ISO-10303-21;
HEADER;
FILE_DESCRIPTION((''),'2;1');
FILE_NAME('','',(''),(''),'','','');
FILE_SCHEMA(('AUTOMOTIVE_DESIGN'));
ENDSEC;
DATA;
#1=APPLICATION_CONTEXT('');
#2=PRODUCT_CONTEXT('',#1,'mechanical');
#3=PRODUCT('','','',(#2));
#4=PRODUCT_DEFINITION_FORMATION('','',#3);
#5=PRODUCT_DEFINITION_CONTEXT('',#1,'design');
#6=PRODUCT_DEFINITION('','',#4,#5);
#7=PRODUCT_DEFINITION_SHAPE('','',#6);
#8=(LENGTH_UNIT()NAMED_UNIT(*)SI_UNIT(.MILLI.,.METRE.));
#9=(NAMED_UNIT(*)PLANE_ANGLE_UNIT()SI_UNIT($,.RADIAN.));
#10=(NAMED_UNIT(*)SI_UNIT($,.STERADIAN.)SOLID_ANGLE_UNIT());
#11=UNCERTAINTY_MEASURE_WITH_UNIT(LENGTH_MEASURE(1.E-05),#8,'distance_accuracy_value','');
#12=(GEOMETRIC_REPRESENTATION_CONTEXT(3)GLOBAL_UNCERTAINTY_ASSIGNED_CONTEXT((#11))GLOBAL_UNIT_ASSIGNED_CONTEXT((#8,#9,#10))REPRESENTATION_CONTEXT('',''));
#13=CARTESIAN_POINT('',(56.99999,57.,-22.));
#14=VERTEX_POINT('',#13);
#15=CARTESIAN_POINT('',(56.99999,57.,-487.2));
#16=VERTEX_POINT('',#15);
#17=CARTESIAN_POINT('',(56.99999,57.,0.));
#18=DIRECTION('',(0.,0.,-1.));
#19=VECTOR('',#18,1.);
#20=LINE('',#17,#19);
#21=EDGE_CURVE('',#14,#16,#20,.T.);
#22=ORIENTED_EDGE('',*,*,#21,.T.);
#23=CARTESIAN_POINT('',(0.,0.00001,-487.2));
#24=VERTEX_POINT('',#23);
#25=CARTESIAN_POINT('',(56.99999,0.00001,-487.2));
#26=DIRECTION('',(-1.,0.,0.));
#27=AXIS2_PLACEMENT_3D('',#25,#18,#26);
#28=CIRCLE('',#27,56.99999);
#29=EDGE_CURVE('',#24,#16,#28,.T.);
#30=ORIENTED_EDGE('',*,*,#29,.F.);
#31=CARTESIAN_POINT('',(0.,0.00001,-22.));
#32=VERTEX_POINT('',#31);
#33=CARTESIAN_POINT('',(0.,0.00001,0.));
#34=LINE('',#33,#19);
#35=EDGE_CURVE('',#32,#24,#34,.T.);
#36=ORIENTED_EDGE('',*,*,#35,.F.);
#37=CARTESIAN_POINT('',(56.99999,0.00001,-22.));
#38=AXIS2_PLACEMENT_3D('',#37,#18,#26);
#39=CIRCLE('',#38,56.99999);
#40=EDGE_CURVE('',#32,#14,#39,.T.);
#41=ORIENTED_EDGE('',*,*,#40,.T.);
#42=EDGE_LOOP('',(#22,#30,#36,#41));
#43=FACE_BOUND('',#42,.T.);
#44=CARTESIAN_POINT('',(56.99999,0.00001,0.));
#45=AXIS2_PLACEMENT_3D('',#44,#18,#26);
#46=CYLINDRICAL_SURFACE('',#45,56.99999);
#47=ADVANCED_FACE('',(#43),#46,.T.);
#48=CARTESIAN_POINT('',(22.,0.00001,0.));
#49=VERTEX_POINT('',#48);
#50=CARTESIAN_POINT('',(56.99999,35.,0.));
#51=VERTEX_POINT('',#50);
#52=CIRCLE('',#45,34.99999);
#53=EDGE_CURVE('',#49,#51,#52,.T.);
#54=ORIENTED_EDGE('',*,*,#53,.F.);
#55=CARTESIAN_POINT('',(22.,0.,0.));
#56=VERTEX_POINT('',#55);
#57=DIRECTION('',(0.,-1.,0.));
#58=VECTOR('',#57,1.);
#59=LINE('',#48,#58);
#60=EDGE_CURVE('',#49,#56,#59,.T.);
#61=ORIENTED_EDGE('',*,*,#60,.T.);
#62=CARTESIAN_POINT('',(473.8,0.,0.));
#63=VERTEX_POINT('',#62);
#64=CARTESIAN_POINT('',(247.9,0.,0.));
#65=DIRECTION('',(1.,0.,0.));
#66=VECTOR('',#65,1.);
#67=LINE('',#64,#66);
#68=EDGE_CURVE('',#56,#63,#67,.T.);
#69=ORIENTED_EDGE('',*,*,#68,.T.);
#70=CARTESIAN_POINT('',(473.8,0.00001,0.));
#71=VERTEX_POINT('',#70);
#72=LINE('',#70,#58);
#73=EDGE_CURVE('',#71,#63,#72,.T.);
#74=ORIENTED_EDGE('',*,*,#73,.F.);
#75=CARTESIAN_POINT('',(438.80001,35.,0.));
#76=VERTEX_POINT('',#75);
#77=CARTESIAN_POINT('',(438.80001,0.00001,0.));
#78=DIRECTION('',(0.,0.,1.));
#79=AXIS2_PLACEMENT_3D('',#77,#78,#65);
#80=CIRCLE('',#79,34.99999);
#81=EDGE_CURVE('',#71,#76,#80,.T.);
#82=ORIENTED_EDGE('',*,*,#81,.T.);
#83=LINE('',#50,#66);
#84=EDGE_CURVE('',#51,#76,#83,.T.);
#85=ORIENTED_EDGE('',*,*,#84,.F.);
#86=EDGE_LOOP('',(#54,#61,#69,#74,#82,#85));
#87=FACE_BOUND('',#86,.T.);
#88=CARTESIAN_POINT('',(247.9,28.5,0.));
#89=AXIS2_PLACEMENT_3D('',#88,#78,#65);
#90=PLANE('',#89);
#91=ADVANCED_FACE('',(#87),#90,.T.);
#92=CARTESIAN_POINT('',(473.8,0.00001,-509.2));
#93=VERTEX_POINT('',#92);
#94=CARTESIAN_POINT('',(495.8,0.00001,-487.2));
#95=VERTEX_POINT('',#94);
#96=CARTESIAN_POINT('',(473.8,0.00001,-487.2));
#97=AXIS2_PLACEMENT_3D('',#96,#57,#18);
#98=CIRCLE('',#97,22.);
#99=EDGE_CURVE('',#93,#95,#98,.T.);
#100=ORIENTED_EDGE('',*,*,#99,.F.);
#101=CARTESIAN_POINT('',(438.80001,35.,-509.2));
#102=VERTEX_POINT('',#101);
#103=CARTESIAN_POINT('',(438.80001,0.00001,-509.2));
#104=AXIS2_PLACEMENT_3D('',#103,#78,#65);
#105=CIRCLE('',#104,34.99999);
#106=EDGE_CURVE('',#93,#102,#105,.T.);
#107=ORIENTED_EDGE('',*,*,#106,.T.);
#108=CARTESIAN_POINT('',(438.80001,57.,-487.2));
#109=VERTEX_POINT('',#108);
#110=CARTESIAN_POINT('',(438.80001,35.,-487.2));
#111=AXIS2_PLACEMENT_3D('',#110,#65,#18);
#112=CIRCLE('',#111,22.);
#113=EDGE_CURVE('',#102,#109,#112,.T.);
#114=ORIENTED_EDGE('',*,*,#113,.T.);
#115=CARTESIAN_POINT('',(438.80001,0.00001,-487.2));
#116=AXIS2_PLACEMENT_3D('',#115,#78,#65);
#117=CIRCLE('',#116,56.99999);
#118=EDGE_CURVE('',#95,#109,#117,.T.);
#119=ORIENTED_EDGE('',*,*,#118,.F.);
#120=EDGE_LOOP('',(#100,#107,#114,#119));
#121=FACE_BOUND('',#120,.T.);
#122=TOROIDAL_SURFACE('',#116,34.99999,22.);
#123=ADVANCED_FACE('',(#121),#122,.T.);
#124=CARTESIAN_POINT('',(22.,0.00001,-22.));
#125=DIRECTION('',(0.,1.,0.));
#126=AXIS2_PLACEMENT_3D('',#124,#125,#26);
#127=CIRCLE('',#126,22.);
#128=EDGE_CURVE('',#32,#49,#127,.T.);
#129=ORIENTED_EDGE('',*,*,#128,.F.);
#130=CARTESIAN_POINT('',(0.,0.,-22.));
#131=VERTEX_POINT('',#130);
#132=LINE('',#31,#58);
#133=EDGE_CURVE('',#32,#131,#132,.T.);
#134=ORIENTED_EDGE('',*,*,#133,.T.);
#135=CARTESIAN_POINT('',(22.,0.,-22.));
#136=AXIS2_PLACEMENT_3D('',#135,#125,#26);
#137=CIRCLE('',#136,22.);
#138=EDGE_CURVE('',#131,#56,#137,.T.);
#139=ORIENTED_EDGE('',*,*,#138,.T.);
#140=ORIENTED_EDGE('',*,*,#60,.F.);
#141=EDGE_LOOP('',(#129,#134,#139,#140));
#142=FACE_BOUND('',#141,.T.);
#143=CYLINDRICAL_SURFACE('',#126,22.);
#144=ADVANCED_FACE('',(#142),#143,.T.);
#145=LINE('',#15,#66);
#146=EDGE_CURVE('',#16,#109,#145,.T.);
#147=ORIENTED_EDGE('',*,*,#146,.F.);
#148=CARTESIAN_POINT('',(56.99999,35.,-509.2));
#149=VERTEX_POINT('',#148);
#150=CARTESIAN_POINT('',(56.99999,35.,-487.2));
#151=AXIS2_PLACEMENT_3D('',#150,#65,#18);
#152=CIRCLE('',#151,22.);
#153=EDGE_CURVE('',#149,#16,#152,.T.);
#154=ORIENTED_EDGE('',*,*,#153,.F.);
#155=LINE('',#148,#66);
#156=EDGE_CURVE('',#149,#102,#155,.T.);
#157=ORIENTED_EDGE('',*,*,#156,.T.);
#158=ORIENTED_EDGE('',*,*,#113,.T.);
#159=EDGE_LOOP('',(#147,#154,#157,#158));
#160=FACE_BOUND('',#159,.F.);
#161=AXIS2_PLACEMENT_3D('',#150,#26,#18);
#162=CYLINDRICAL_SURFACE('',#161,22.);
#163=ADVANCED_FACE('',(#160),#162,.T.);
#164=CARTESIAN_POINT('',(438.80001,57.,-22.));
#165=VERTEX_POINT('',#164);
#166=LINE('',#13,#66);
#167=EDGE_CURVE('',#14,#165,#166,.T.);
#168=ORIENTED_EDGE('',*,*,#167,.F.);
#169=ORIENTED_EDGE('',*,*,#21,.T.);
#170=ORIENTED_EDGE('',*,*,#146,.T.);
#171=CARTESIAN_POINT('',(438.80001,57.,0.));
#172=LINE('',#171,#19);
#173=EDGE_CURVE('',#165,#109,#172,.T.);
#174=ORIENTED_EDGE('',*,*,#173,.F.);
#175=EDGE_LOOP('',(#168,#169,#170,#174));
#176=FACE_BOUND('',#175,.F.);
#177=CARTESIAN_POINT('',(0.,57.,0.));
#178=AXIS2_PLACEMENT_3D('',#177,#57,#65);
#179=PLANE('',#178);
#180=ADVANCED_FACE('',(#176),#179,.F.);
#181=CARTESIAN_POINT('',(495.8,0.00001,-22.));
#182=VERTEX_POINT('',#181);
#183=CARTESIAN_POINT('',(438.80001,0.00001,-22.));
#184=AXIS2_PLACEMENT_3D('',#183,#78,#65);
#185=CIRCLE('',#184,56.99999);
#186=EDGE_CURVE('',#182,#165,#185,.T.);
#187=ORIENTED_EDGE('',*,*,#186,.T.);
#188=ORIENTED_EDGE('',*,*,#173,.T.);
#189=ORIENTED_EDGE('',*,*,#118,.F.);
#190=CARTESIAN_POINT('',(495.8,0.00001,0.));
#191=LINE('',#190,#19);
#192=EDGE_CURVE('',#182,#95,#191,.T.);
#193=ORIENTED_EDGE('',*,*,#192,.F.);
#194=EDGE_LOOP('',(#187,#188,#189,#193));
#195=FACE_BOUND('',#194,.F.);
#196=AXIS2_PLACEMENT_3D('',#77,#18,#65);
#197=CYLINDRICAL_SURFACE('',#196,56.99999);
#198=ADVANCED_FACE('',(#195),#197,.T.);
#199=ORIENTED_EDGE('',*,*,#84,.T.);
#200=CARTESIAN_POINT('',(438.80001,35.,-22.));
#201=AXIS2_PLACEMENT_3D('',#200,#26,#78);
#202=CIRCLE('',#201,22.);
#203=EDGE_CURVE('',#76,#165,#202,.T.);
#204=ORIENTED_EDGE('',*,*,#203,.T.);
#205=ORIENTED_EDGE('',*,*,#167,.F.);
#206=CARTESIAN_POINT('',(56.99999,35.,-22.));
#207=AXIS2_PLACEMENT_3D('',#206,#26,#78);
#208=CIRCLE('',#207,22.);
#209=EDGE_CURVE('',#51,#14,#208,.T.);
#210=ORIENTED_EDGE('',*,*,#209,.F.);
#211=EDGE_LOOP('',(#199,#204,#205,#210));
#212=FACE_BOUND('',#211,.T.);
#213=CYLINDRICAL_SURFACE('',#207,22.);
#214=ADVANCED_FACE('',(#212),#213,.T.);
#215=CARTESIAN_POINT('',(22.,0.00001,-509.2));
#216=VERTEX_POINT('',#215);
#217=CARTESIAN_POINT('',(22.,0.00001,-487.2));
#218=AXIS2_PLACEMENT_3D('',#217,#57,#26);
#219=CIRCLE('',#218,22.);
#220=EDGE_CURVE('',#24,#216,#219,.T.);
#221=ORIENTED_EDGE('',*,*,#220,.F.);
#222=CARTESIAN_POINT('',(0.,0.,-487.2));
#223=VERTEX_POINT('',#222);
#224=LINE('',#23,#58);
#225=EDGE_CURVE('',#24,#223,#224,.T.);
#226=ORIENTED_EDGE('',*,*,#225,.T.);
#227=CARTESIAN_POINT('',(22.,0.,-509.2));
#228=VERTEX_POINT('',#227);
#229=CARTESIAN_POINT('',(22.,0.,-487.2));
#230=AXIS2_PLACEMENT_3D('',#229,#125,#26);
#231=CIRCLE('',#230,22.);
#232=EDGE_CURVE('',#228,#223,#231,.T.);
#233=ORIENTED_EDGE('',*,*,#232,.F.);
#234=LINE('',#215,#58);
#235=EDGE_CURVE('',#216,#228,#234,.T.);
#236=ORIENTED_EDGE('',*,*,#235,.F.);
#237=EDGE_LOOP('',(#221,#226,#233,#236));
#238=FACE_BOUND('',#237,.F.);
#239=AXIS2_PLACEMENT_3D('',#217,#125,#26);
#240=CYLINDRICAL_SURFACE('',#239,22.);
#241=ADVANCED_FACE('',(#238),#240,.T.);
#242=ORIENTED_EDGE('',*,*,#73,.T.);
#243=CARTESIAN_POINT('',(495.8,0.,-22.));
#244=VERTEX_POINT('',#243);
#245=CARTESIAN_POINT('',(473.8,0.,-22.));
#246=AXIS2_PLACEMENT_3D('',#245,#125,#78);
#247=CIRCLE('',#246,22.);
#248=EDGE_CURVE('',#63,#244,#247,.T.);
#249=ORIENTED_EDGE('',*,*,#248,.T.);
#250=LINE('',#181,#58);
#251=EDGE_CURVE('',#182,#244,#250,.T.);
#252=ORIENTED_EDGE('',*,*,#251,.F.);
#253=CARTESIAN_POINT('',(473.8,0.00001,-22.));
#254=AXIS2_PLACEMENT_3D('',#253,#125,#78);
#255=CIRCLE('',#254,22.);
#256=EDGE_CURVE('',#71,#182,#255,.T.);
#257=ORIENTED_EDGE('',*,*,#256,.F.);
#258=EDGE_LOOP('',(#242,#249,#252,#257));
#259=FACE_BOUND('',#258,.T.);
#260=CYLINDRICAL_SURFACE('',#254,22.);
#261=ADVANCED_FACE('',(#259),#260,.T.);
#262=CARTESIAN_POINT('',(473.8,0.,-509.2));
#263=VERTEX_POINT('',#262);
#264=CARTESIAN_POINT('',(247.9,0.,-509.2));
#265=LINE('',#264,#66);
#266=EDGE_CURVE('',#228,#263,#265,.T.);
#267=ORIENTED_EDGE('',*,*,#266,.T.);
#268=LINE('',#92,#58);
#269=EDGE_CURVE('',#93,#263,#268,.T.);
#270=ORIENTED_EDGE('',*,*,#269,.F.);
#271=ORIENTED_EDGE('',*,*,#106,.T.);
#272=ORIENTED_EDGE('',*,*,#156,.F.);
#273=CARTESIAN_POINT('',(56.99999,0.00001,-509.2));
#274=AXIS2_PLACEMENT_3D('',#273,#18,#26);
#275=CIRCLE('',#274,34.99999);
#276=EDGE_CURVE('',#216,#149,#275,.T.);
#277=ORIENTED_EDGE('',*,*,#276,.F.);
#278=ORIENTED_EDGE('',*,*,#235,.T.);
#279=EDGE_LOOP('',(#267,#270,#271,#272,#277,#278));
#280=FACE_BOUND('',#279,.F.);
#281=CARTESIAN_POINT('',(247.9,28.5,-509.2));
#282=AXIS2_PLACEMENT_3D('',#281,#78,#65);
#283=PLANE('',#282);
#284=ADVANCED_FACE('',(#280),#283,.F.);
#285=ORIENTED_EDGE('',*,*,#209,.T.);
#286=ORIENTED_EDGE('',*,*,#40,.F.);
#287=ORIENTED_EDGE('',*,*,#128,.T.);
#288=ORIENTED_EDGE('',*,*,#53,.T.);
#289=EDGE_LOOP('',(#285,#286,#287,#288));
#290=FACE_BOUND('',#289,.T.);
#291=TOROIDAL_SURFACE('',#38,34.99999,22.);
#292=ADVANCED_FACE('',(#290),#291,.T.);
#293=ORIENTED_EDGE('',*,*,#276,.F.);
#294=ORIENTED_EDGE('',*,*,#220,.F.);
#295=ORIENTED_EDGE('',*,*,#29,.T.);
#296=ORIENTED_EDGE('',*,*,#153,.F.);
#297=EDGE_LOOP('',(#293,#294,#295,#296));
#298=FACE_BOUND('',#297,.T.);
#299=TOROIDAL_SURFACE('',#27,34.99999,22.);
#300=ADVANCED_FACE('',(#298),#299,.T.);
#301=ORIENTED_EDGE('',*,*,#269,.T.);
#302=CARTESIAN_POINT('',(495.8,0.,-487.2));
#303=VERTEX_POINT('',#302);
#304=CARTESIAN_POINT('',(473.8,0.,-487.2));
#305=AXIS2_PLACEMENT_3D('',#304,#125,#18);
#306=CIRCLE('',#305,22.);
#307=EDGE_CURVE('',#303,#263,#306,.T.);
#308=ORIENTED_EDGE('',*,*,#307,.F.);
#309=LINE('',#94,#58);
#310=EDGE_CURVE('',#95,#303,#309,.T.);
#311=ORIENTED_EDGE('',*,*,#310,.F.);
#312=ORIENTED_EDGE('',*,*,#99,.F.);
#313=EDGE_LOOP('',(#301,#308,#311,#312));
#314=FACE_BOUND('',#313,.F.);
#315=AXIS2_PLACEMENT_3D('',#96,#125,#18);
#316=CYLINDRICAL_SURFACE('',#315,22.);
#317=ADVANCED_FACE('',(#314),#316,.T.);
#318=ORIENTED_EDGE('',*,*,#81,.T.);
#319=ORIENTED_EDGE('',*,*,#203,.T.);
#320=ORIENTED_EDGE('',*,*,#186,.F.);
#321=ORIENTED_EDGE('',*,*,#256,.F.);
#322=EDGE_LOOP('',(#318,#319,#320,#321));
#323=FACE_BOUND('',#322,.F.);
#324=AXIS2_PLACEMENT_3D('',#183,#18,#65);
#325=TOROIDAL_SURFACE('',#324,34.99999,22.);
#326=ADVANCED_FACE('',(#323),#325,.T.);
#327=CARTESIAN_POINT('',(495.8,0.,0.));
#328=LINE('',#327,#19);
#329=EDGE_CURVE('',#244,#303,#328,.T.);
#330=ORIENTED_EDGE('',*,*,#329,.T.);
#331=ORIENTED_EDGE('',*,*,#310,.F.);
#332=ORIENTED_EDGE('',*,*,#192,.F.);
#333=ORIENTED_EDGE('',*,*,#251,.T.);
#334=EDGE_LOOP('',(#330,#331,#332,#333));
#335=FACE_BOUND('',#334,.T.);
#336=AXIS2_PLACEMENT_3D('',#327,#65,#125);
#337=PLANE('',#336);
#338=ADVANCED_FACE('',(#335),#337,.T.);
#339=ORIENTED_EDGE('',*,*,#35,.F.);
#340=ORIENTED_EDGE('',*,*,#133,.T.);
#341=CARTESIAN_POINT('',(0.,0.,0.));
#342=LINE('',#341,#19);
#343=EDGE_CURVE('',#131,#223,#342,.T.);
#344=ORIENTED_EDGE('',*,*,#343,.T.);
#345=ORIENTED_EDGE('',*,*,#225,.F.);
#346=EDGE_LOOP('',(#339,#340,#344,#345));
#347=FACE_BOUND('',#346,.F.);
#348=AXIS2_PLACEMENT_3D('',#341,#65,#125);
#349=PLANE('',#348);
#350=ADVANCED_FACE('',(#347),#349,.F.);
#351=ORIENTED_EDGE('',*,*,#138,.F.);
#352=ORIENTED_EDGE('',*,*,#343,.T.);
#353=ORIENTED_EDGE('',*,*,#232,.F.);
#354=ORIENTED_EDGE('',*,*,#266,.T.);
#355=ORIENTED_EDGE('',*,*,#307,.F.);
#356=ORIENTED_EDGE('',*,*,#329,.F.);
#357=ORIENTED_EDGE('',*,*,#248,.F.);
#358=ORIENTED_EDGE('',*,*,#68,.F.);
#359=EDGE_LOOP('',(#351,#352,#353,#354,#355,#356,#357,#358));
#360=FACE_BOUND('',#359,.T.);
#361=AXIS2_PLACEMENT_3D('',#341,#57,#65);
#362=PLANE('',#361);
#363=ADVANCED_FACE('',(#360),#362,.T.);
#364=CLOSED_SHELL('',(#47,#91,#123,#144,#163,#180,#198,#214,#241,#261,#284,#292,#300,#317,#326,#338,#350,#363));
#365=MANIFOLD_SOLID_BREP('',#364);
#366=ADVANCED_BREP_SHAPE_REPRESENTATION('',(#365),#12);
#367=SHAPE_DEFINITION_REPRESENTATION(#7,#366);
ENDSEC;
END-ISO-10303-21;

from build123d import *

# Parameters (mm, degrees)
F0_W         = 495.8
F0_H         = 57
F1_DEPTH     = 509.2
F2_R         = 56.99999
F3_T1_DEPTH  = 381.80002
F3_T3_DEPTH  = 55.00001
F3_T6_ANGLE  = 90
F3_T8_ANGLE  = 90
F3_T10_ANGLE = 90
F3_T12_ANGLE = 90


# Not quite as in the source:
# - a fillet or chamfer that OpenCascade refuses, or shapes differently, is made with other operations: its cross-section is extruded or revolved along the edge and cut away or added
# - a fillet or chamfer is up to 0.001 mm smaller than in the source, because OpenCascade refuses the exact size


with BuildPart() as f1:
    # F0 (on Top) → F1 (new body)
    with BuildSketch(Plane.XY):
        with Locations((247.9, 28.5)):
            Rectangle(F0_W, F0_H)
    extrude(amount=-F1_DEPTH)

    # F2 (radius 57 in the source; OpenCascade refuses exactly that, so slightly less here)
    f2_edges = [f1.edges().sort_by_distance(p)[0] for p in [
        (495.8, 57, -254.6),
        (0, 57, -254.6),
    ]]
    fillet(f2_edges, radius=F2_R)

    # F3: fillet of radius 22 on 6 edges, made by hand

    # F3_s2 → F3_t1 (cut)
    with BuildSketch(Plane.YZ.offset(56.99999)):
        with BuildLine():
            ThreePointArc((35, 0), (50.5563491861, -6.4436508139), (57, -22))
            Line((57, -22), (57, 0))
            Line((57, 0), (35, 0))
        make_face()
        with BuildLine():
            ThreePointArc((35, -509.2), (50.5563491861, -502.7563491861), (57, -487.2))
            Line((57, -487.2), (57, -509.2))
            Line((57, -509.2), (35, -509.2))
        make_face()
    extrude(amount=F3_T1_DEPTH, mode=Mode.SUBTRACT)

    # F3_s4 → F3_t3 (cut)
    with BuildSketch(Plane.XZ.offset(-1e-05)):
        with BuildLine():
            ThreePointArc((473.8, -509.2), (489.3563491861, -502.7563491861), (495.8, -487.2))
            Line((495.8, -487.2), (495.8, -509.2))
            Line((495.8, -509.2), (473.8, -509.2))
        make_face()
        with BuildLine():
            ThreePointArc((0, -487.2), (6.4436508139, -502.7563491861), (22, -509.2))
            Line((22, -509.2), (0, -509.2))
            Line((0, -509.2), (0, -487.2))
        make_face()
        with BuildLine():
            ThreePointArc((0, -22), (6.4436508139, -6.4436508139), (22, 0))
            Line((22, 0), (0, 0))
            Line((0, 0), (0, -22))
        make_face()
        with BuildLine():
            ThreePointArc((473.8, 0), (489.3563491861, -6.4436508139), (495.8, -22))
            Line((495.8, -22), (495.8, 0))
            Line((495.8, 0), (473.8, 0))
        make_face()
    extrude(amount=F3_T3_DEPTH, mode=Mode.SUBTRACT)

    # F3_s5 → F3_t6 (revolve, cut)
    with BuildSketch(Plane.XZ.offset(-1e-05)):
        with BuildLine():
            ThreePointArc((473.8, 0), (489.3563491861, -6.4436508139), (495.8, -22))
            Line((495.8, -22), (495.8, 0))
            Line((495.8, 0), (473.8, 0))
        make_face()
    revolve(axis=Axis((438.80001, 1e-05, 0), (0, 0, 1)), revolution_arc=F3_T6_ANGLE, mode=Mode.SUBTRACT)

    # F3_s7 → F3_t8 (revolve, cut)
    with BuildSketch(Plane.XZ.offset(-1e-05)):
        with BuildLine():
            ThreePointArc((22, 0), (6.4436508139, -6.4436508139), (0, -22))
            Line((0, -22), (0, 0))
            Line((0, 0), (22, 0))
        make_face()
    revolve(axis=Axis((56.99999, 1e-05, 0), (0, 0, -1)), revolution_arc=F3_T8_ANGLE, mode=Mode.SUBTRACT)

    # F3_s9 → F3_t10 (revolve, cut)
    with BuildSketch(Plane.XZ.offset(-1e-05)):
        with BuildLine():
            ThreePointArc((0, -487.2), (6.4436508139, -502.7563491861), (22, -509.2))
            Line((22, -509.2), (0, -509.2))
            Line((0, -509.2), (0, -487.2))
        make_face()
    revolve(axis=Axis((56.99999, 1e-05, -509.2), (0, 0, -1)), revolution_arc=F3_T10_ANGLE, mode=Mode.SUBTRACT)

    # F3_s11 → F3_t12 (revolve, cut)
    with BuildSketch(Plane.XZ.offset(-1e-05)):
        with BuildLine():
            ThreePointArc((473.8, -509.2), (489.3563491861, -502.7563491861), (495.8, -487.2))
            Line((495.8, -487.2), (495.8, -509.2))
            Line((495.8, -509.2), (473.8, -509.2))
        make_face()
    revolve(axis=Axis((438.80001, 1e-05, -509.2), (0, 0, 1)), revolution_arc=F3_T12_ANGLE, mode=Mode.SUBTRACT)


solid = f1.part
